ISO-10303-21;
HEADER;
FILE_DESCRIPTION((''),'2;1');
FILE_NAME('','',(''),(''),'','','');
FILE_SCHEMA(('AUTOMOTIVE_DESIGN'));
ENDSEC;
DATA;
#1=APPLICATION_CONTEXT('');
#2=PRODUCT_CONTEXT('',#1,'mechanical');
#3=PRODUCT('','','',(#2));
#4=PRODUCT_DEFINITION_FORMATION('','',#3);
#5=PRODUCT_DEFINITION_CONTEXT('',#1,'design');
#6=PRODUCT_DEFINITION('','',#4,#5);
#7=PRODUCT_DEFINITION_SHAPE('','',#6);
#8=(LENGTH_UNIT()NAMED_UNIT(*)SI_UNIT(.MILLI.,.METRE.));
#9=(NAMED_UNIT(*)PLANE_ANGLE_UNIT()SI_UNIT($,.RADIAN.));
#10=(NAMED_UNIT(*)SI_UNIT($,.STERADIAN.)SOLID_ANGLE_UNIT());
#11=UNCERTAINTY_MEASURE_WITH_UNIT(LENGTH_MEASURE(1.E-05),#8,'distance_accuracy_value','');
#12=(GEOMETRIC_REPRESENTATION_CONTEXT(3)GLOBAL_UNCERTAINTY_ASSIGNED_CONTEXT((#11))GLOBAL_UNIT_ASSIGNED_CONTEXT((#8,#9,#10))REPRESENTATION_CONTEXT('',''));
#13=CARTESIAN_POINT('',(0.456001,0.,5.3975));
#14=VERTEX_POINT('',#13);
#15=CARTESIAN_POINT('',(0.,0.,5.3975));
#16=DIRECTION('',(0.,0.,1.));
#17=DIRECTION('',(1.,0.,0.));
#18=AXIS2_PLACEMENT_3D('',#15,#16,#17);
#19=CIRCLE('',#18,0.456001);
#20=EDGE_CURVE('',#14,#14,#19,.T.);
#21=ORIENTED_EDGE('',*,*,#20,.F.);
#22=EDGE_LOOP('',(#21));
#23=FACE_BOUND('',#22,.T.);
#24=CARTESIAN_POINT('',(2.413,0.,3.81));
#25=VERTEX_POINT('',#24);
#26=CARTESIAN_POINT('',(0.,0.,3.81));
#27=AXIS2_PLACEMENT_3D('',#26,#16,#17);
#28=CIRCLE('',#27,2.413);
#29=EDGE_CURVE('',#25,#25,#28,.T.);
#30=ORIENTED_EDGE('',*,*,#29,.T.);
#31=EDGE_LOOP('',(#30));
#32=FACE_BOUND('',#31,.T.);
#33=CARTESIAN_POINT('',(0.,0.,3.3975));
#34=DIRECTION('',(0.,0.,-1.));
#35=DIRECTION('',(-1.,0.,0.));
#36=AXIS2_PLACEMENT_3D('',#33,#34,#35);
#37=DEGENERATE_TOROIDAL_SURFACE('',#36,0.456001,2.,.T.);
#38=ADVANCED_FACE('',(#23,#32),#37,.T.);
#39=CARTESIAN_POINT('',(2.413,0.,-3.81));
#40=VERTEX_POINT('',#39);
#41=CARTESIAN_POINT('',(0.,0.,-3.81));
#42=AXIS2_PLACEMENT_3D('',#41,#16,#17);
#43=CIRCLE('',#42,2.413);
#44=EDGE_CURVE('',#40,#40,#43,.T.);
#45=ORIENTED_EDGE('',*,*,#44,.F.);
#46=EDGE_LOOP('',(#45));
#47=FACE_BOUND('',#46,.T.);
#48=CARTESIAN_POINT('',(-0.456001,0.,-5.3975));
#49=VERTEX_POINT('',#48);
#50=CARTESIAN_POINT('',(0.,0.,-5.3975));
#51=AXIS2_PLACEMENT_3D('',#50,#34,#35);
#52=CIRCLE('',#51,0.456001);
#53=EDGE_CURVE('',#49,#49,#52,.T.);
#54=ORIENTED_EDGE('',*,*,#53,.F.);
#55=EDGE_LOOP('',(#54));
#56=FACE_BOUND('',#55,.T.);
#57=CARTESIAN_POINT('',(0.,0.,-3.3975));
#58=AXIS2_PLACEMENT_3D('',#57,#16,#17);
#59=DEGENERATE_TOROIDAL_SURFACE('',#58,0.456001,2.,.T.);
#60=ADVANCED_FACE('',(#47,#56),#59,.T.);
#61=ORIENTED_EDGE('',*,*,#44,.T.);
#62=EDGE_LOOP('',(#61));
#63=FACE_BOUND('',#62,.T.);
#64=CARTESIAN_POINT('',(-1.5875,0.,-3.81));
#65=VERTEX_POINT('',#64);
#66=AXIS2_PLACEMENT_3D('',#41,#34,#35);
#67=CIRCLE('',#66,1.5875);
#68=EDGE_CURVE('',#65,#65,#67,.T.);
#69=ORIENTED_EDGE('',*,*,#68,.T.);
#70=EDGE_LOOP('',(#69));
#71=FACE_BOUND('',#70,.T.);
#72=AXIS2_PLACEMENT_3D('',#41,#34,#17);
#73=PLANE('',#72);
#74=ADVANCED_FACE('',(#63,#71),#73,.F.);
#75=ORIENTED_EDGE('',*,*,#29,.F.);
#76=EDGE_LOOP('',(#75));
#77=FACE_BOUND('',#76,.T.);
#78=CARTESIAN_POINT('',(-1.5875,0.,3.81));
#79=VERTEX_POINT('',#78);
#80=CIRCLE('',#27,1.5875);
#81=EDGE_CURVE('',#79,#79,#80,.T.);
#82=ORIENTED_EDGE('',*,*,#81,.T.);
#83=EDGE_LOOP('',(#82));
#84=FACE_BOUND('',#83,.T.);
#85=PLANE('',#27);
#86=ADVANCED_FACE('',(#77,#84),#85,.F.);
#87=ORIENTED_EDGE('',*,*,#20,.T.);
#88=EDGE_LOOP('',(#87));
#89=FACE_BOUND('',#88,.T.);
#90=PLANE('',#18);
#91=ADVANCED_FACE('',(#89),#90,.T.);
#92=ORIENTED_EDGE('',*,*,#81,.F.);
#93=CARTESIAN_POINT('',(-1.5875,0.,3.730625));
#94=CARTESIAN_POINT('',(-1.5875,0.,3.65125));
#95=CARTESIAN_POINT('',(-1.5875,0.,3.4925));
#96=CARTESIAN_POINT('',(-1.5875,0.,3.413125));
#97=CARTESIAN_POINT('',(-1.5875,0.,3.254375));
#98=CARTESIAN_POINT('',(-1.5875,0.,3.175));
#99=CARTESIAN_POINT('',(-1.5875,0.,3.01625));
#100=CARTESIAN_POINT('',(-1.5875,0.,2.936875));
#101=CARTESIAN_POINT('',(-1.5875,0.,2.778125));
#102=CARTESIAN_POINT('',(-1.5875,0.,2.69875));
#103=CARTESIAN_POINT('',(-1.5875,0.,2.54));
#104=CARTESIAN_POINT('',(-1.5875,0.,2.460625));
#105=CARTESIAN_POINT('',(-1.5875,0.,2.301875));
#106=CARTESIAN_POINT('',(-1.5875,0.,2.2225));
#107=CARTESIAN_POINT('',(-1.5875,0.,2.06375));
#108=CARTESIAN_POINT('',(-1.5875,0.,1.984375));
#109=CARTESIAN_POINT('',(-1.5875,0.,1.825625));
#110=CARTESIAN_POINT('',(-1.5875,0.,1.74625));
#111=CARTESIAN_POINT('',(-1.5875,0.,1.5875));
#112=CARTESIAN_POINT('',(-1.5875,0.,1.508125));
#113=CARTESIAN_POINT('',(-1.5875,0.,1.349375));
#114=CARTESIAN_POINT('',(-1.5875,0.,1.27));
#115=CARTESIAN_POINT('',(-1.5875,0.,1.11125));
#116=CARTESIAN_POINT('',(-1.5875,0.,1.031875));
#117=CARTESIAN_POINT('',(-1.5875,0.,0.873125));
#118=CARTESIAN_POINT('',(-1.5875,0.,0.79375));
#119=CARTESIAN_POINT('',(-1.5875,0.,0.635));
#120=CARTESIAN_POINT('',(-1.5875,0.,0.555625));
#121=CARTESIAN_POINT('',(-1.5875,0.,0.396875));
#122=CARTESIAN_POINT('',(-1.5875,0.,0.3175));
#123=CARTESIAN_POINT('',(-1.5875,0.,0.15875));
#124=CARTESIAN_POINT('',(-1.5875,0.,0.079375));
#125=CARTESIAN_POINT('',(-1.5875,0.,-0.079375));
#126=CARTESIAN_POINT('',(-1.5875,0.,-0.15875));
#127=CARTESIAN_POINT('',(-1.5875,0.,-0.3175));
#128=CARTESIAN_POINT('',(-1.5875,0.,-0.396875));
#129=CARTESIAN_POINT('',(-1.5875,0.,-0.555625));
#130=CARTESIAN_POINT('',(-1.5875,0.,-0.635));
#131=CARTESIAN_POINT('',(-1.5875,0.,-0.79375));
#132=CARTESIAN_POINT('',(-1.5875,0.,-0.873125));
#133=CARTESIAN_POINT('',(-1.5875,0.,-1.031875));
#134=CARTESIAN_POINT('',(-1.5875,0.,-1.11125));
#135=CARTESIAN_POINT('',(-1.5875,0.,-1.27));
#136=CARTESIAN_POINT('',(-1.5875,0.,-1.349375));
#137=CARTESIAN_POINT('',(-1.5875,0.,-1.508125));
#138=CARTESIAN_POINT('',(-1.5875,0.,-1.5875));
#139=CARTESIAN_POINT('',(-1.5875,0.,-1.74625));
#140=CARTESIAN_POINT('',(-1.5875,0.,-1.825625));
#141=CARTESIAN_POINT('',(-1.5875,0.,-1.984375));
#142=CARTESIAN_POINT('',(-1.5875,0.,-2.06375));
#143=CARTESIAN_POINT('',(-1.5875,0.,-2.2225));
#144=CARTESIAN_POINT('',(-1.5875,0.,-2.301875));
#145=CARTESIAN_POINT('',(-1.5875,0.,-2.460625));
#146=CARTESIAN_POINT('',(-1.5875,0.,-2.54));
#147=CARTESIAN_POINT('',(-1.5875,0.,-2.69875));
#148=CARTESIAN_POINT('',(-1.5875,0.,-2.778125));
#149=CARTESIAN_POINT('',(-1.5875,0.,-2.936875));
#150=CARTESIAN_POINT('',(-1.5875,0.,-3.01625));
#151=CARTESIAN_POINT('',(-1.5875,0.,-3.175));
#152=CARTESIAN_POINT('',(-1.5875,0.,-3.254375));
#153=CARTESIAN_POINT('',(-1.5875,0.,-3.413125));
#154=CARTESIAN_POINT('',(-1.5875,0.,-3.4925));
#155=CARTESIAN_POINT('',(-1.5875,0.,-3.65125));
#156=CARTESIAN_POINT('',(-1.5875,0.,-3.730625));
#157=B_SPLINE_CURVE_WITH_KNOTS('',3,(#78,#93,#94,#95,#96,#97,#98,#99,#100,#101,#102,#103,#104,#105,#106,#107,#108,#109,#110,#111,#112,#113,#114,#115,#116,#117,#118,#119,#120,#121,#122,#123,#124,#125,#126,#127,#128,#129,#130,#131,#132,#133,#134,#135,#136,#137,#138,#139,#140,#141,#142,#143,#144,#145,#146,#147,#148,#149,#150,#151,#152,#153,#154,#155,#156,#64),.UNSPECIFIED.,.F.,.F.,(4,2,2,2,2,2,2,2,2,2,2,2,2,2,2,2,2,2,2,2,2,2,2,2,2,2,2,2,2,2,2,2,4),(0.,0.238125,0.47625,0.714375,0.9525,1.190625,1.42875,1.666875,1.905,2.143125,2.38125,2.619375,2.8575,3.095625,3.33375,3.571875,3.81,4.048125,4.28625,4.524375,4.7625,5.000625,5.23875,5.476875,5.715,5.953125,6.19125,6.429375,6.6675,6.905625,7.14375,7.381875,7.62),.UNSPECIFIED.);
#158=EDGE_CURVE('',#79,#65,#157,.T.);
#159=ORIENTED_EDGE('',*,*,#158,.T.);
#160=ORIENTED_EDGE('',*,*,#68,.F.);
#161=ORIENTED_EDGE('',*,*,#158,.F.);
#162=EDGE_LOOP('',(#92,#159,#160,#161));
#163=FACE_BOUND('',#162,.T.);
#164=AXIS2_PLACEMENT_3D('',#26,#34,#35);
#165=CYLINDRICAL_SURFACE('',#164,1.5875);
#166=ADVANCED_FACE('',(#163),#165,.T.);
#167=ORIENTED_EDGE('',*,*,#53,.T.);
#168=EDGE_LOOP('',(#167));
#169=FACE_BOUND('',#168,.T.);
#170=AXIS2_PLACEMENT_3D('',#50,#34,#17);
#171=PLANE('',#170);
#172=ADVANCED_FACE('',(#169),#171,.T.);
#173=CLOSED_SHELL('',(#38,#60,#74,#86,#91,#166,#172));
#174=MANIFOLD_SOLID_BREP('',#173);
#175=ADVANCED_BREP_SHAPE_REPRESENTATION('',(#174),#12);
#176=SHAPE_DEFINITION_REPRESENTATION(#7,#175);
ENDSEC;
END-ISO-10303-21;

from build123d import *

# Parameters (mm, degrees)
CROQUIS1_R              = 1.5875
SALIENTE_EXTRUIR1_DEPTH = 3.81
CROQUIS2_R              = 2.413
SALIENTE_EXTRUIR2_DEPTH = 1.5875
REDONDEO1_R             = 2
REDONDEO2_R             = 2


with BuildPart() as part:
    # Croquis1 → Saliente-Extruir1 (new, symmetric)
    with BuildSketch(Plane.XY):
        with Locations(Location((0, 0, 0), (0, 0, 180))):
            Circle(CROQUIS1_R)
    extrude(amount=SALIENTE_EXTRUIR1_DEPTH, both=True)

    # Croquis2 → Saliente-Extruir2 (add)
    with BuildSketch(Plane.XY.offset(3.81)):
        Circle(CROQUIS2_R)
    saliente_extruir2 = extrude(amount=SALIENTE_EXTRUIR2_DEPTH)

    # Redondeo1
    # the kernel refuses this fillet: 2 mm, written as the material it takes off along each edge
    with BuildSketch(Plane(origin=(0, 0, 5.3975), x_dir=(1, 0, 0), z_dir=(0, -1, 0))) as redondeo1_piece_1:
        with BuildLine():
            CenterArc((0.456001341, -2), REDONDEO1_R, 11.902682649, 78.097317351)
            Line((0.456001341, 0), (0.456001341, 0.04))
            Line((0.456001341, 0.04), (2.413, 0.04))
            Line((2.413, 0.04), (2.453, 0))
            ThreePointArc((2.453, 0), (2.453, -0.79375), (2.452139973, -1.57925))
            Line((2.452139973, -1.57925), (2.413, -1.5875))
        make_face()
    revolve(axis=Axis((0, 0, 5.3975), (0, 0, 1)), mode=Mode.SUBTRACT)

    # Simetría4: Saliente-Extruir2 across plane
    add(saliente_extruir2.mirror(Plane.XY))

    # Redondeo2
    # the kernel refuses this fillet: 2 mm, written as the material it takes off along each edge
    with BuildSketch(Plane(origin=(0, 0, -5.3975), x_dir=(1, 0, 0), z_dir=(0, -1, 0))) as redondeo2_piece_1:
        with BuildLine():
            CenterArc((0.456001341, 2), REDONDEO2_R, 270, 78.097317351)
            Line((0.456001341, 0), (0.456001341, -0.04))
            Line((0.456001341, -0.04), (2.413, -0.04))
            Line((2.413, -0.04), (2.453, 0))
            ThreePointArc((2.453, 0), (2.453, 0.79375), (2.452139973, 1.57925))
            Line((2.452139973, 1.57925), (2.413, 1.5875))
        make_face()
    revolve(axis=Axis((0, 0, -5.3975), (0, 0, 1)), mode=Mode.SUBTRACT)


solid = part.part
